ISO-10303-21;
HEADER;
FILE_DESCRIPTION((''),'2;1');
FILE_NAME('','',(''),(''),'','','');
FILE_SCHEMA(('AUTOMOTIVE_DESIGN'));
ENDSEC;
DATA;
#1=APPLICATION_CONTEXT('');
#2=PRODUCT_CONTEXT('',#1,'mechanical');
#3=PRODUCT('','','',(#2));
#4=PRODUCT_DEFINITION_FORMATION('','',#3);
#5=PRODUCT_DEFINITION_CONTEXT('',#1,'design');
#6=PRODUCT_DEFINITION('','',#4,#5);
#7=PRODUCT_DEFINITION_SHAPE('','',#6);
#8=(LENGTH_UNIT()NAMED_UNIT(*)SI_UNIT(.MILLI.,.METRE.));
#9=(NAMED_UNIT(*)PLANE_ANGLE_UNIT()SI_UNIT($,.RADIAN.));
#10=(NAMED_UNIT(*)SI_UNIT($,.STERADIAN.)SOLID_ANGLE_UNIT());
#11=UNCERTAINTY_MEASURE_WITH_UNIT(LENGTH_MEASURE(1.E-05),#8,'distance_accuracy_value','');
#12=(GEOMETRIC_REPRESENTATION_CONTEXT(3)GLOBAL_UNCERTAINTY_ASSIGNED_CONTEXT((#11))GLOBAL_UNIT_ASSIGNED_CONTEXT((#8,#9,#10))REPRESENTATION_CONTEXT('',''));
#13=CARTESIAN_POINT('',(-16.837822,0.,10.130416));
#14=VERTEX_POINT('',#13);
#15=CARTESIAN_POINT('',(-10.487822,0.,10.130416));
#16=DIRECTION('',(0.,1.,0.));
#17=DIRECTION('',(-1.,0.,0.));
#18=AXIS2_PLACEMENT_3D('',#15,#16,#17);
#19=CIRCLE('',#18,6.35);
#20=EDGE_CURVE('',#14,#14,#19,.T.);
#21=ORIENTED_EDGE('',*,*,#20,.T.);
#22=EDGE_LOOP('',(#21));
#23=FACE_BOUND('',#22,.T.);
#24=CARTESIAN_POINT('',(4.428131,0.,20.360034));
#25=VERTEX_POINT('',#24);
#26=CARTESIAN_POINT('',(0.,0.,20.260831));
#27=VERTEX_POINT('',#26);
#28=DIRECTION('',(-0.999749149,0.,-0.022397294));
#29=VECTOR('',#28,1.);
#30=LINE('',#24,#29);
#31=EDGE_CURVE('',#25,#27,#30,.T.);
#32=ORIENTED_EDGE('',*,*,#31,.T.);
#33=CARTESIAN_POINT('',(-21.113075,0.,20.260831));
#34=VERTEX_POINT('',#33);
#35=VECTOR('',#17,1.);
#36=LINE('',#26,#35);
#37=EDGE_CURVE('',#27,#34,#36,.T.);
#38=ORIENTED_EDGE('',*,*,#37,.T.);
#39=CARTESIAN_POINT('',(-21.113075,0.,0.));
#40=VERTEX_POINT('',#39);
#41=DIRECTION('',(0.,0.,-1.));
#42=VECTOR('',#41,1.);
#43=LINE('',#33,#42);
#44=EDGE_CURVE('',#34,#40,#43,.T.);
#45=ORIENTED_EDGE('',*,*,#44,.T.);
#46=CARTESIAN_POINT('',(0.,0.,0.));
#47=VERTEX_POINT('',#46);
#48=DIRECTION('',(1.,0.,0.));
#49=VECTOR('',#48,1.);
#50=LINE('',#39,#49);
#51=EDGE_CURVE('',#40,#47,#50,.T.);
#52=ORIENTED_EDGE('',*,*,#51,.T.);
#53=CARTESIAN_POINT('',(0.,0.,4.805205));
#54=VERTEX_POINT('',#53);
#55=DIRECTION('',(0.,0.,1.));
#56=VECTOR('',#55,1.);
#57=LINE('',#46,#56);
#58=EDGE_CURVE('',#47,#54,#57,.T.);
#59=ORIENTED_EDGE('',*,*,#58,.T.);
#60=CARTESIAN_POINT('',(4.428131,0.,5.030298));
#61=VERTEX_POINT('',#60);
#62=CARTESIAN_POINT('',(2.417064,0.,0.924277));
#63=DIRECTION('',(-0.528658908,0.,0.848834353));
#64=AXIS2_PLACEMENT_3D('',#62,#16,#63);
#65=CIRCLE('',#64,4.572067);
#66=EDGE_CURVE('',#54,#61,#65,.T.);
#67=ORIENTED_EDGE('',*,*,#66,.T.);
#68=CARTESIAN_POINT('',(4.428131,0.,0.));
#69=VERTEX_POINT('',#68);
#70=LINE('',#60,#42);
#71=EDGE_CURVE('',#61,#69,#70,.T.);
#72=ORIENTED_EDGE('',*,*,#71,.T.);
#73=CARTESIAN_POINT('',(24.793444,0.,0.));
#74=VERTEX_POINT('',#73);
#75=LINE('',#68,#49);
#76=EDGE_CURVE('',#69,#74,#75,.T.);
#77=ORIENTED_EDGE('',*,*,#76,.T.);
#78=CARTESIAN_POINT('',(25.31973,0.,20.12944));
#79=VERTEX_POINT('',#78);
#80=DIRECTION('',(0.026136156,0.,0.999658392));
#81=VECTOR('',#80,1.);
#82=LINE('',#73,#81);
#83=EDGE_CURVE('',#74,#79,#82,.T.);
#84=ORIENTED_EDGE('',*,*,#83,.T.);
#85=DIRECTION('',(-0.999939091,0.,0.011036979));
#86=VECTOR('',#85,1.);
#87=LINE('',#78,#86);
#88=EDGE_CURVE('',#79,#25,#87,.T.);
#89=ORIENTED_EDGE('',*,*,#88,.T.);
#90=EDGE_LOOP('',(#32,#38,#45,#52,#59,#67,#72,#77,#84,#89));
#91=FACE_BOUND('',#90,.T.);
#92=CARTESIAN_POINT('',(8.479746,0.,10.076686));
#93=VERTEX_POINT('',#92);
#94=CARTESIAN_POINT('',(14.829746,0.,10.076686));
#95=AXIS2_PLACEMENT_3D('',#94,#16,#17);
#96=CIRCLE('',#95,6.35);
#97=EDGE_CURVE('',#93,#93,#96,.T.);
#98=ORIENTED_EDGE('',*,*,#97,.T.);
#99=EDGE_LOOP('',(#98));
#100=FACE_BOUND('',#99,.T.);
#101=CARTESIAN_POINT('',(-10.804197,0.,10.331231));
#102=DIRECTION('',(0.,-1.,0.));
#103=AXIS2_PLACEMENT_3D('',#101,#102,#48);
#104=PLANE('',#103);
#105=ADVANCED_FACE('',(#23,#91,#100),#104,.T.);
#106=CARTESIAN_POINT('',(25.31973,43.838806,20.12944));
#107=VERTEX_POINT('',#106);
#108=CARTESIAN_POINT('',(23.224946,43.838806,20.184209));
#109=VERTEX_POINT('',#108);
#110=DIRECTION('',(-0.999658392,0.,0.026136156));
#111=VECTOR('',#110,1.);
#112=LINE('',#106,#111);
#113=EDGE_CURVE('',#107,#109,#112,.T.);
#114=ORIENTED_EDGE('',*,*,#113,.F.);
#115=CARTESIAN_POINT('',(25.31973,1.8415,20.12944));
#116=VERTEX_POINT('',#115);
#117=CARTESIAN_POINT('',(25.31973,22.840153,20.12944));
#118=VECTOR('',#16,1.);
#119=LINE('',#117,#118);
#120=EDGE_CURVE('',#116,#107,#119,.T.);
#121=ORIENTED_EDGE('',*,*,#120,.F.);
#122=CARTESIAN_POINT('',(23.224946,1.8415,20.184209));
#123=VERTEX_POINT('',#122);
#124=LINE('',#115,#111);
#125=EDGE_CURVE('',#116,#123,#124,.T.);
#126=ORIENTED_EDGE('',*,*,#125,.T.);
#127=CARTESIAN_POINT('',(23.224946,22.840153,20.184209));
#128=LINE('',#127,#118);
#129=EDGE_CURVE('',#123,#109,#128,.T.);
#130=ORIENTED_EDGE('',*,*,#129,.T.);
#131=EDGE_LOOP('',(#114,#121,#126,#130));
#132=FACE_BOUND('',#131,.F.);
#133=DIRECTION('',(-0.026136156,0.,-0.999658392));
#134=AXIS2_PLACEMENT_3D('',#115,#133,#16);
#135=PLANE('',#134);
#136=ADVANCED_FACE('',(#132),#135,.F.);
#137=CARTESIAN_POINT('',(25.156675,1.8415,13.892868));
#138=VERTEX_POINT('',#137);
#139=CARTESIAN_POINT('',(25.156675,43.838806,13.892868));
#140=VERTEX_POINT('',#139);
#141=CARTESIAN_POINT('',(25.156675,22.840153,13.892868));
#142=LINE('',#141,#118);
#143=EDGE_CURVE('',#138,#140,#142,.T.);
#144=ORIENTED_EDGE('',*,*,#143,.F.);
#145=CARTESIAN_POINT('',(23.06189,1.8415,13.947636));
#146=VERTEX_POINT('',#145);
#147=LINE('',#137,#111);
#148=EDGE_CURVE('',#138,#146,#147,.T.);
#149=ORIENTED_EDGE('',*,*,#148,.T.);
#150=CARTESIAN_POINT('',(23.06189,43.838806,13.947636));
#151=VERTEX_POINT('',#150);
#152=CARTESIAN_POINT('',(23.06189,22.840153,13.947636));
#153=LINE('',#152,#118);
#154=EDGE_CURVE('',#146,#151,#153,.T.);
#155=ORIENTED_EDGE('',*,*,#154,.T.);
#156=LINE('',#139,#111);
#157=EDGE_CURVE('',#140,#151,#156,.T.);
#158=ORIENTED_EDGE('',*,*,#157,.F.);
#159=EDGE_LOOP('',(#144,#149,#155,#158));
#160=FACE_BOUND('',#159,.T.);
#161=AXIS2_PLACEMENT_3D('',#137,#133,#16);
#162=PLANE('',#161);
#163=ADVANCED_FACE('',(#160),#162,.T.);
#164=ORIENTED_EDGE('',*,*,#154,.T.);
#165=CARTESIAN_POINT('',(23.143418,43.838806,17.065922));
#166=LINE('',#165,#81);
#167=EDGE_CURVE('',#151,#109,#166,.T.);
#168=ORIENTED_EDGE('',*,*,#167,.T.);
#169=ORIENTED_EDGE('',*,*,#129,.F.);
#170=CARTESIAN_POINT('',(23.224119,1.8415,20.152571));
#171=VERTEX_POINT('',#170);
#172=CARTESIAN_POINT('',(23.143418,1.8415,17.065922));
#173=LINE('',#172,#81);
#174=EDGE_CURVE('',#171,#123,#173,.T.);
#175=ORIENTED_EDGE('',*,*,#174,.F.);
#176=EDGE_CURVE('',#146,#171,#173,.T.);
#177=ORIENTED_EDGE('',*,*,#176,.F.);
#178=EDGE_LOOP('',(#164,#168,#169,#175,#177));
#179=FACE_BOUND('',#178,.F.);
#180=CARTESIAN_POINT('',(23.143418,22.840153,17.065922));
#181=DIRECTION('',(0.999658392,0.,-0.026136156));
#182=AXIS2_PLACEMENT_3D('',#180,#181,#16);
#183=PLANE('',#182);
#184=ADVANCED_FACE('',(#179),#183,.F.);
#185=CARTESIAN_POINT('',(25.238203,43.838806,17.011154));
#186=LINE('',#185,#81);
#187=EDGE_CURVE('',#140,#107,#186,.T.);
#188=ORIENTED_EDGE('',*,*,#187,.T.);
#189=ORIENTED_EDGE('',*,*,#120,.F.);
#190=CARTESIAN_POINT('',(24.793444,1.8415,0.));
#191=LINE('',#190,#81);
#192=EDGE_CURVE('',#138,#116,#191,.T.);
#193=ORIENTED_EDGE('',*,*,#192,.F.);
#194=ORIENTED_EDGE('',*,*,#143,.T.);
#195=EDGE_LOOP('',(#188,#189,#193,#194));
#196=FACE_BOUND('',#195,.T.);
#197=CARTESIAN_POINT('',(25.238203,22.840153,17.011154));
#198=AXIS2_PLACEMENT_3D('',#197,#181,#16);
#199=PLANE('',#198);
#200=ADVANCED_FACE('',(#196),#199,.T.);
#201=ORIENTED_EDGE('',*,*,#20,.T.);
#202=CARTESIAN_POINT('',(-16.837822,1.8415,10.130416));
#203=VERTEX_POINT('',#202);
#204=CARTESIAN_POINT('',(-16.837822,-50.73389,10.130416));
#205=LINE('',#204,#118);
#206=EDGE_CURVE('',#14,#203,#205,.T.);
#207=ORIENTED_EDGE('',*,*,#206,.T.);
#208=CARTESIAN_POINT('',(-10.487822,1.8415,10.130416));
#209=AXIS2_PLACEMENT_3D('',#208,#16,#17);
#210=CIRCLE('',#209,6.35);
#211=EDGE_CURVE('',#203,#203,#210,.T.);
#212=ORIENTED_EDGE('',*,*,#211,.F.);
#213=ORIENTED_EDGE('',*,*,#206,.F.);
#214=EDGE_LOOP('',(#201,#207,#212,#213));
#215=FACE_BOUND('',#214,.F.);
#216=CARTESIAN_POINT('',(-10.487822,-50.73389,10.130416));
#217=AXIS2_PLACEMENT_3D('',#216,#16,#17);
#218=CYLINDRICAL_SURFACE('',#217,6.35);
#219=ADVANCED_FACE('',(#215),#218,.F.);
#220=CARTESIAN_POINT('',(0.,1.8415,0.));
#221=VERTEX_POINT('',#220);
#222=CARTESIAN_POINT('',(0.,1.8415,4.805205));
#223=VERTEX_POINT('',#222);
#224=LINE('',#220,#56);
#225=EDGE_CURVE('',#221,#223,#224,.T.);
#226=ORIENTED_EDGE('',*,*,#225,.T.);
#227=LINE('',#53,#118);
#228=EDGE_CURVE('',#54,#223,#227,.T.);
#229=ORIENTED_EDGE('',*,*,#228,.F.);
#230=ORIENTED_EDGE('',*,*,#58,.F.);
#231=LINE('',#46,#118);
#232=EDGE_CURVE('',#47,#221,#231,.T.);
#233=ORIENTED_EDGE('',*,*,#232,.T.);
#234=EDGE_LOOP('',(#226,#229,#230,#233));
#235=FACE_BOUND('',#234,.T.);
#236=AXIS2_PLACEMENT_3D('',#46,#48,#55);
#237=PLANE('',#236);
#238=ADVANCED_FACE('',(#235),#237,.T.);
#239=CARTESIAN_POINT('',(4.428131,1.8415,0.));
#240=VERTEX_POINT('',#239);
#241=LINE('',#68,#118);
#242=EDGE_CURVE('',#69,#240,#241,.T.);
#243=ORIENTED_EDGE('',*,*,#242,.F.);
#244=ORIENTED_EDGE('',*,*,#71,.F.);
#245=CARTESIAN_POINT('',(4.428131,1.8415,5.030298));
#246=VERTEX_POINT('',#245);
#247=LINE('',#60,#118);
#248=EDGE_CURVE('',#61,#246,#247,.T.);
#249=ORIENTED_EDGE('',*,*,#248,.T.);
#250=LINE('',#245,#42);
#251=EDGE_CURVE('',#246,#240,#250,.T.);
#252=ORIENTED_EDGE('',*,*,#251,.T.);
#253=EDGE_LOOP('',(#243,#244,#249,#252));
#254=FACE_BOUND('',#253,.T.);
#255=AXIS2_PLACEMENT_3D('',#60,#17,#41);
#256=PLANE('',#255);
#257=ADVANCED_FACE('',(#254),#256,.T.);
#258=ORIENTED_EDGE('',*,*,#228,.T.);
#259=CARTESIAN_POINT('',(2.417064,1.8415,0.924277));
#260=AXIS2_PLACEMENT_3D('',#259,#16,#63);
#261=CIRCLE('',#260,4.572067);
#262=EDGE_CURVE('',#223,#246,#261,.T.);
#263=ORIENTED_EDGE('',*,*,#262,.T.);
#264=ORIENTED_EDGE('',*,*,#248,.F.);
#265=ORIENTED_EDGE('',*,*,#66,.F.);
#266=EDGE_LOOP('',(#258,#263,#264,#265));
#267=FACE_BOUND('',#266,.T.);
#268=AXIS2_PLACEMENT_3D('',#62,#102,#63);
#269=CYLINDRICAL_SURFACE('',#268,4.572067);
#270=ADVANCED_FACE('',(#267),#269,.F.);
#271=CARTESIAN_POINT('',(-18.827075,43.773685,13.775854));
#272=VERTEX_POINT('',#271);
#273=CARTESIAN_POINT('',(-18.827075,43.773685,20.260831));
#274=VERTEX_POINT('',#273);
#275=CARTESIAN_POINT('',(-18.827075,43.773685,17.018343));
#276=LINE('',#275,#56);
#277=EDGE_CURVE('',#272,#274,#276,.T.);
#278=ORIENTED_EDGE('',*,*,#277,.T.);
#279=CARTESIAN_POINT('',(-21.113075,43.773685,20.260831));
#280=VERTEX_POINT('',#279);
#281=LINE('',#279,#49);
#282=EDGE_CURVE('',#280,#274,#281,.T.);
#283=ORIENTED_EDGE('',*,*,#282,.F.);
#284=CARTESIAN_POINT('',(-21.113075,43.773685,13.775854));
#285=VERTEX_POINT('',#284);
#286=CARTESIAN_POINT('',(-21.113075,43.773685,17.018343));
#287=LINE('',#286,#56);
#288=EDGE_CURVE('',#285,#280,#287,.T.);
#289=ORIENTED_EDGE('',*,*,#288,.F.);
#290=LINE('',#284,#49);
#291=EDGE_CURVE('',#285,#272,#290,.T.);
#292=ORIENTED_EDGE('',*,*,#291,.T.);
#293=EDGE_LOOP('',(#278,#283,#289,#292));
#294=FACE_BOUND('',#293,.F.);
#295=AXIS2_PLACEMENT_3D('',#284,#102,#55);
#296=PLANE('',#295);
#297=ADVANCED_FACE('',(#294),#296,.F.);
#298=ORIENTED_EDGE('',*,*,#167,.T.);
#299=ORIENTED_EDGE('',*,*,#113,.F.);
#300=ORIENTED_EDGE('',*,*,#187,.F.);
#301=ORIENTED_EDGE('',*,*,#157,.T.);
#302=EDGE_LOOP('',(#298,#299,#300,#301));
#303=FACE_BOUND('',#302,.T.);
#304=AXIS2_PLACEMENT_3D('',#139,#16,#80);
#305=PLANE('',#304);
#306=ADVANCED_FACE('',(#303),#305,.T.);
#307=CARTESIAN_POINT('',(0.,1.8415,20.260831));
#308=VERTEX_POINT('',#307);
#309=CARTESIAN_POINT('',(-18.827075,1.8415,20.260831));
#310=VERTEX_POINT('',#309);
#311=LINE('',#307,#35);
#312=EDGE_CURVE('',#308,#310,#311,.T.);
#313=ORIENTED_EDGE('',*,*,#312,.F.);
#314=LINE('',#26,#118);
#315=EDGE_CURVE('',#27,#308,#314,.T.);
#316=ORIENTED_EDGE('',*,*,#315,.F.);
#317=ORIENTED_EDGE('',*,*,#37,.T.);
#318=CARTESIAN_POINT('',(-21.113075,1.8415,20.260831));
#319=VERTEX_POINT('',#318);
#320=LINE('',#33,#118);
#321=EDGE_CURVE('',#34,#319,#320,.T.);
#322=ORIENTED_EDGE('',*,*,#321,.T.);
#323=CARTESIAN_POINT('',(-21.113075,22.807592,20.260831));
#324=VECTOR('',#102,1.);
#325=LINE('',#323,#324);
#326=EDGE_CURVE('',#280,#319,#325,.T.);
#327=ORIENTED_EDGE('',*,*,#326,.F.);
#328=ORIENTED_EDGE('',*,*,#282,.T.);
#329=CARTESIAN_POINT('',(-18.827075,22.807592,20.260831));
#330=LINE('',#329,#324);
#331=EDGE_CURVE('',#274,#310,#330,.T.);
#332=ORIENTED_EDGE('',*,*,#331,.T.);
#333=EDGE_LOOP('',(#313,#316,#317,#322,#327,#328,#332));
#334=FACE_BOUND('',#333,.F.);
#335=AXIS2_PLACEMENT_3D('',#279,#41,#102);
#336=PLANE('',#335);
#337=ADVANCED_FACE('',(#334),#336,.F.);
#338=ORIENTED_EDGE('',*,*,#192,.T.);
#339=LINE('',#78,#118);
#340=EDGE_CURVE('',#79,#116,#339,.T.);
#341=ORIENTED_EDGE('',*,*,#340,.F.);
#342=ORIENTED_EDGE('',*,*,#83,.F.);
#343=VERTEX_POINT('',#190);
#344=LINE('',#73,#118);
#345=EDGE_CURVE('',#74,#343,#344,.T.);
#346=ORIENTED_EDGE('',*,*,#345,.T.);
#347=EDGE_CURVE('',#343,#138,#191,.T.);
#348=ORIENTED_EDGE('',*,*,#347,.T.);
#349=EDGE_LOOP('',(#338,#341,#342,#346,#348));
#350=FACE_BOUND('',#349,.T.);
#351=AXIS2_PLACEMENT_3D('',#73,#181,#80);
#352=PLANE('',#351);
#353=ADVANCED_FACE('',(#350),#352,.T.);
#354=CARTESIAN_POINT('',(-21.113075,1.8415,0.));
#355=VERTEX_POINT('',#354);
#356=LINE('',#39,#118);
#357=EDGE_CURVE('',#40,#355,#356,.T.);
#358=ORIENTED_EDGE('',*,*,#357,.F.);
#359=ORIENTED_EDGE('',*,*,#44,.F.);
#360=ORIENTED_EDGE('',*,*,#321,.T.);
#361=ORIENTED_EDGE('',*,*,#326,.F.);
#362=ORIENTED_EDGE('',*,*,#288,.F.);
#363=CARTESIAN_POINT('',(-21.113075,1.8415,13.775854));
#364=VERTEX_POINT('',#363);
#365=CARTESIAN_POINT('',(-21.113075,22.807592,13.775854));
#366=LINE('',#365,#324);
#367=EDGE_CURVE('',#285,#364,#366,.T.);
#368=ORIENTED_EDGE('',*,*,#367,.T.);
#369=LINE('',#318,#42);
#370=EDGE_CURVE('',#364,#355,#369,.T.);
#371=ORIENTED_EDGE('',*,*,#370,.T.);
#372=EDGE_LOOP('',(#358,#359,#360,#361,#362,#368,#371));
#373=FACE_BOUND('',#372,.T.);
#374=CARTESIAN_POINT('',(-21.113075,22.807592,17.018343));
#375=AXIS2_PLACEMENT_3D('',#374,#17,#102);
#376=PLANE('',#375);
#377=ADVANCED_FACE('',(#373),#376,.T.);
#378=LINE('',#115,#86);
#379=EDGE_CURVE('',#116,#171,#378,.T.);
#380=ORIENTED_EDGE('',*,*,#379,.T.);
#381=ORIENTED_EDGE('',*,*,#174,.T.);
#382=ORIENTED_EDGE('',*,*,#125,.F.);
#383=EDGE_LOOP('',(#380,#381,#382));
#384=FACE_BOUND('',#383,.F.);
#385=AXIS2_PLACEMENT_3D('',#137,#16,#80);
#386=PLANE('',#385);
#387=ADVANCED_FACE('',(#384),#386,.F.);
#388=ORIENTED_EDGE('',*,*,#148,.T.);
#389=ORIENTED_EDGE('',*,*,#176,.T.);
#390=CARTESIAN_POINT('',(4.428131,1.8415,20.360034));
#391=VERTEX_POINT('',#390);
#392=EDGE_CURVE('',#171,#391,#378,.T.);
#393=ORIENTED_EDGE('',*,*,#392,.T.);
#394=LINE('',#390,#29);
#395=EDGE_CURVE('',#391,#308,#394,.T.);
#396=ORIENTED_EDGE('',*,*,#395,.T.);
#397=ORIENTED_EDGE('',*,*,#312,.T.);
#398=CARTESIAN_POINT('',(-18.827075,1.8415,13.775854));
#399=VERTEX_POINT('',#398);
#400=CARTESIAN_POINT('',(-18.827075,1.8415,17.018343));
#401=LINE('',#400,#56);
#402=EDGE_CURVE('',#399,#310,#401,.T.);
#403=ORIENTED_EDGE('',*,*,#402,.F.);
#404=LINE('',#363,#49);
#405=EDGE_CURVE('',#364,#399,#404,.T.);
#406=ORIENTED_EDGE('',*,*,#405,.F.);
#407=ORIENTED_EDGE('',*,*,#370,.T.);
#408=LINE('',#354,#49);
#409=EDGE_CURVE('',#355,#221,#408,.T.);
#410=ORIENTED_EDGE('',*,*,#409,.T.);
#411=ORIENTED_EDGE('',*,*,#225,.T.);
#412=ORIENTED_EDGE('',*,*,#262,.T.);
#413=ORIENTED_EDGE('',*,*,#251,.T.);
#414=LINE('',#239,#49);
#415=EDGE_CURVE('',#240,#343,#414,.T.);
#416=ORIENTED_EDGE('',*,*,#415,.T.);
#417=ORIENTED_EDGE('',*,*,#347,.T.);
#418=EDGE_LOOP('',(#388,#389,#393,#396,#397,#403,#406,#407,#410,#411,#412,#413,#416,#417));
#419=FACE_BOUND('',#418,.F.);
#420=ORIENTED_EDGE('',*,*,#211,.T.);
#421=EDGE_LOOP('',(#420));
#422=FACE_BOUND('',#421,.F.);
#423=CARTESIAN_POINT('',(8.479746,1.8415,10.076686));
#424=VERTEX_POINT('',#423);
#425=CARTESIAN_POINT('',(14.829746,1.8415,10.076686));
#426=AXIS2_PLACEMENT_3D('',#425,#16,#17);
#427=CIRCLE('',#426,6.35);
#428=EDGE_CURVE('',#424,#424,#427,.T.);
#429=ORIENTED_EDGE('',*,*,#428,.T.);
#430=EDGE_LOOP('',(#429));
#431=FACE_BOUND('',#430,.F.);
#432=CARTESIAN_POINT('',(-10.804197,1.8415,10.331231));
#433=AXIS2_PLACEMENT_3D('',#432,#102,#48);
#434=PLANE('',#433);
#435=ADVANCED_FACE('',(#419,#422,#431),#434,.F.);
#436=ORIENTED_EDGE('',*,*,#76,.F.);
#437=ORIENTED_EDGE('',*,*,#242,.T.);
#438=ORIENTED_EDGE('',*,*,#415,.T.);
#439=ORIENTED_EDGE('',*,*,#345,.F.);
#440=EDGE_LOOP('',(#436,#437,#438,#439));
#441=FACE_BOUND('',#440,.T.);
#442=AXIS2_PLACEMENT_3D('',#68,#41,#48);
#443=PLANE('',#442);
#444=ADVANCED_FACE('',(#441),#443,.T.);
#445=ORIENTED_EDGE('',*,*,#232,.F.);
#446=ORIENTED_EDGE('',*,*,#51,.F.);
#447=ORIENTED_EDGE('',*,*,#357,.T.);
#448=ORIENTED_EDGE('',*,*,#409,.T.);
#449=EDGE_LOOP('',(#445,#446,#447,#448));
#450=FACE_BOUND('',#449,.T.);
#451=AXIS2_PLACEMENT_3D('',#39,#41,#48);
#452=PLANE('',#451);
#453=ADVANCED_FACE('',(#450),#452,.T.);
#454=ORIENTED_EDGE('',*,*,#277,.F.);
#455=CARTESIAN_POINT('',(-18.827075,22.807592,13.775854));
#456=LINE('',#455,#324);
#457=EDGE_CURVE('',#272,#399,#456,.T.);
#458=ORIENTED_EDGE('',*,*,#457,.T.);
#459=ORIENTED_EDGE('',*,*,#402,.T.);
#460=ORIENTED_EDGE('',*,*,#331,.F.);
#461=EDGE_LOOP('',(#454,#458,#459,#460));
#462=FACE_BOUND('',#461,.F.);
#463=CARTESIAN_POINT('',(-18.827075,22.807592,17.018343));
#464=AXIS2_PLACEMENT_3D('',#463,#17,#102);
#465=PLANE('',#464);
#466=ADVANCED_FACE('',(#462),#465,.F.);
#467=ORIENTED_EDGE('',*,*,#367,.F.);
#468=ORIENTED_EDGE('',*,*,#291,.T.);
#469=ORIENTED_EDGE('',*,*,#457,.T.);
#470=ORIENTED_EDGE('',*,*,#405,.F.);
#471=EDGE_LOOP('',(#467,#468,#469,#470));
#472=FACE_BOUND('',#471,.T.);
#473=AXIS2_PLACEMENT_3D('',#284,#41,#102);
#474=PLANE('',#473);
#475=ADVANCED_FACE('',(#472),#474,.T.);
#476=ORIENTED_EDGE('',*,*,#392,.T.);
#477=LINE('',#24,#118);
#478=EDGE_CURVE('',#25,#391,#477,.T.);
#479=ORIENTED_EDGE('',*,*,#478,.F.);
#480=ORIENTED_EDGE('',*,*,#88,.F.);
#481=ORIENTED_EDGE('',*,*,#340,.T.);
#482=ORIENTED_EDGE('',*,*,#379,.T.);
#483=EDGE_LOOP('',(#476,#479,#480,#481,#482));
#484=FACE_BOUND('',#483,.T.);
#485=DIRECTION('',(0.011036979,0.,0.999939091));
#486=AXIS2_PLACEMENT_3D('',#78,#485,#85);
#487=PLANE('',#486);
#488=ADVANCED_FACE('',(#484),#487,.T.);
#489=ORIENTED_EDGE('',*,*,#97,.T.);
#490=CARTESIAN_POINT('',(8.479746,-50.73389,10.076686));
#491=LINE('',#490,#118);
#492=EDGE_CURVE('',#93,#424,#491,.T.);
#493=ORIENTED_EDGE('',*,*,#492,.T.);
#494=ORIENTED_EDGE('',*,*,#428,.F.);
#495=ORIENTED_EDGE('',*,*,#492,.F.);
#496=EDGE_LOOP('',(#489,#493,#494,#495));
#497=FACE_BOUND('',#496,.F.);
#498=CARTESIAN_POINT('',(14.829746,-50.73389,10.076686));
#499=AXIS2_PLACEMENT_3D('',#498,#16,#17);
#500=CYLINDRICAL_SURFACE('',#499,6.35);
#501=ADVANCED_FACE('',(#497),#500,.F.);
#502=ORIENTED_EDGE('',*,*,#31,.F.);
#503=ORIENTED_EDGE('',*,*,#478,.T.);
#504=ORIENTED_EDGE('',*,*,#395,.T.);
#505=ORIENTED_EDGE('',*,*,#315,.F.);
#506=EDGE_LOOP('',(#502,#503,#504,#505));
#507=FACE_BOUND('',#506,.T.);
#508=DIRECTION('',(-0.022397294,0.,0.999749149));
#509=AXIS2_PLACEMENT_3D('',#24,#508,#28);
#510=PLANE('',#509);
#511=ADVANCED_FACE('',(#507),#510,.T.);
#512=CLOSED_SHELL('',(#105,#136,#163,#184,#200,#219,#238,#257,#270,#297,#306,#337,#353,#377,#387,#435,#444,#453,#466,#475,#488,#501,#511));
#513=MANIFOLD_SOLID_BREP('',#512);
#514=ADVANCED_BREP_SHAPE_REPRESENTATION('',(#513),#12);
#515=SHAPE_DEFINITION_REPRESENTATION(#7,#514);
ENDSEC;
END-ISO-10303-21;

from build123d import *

# Parameters (mm, degrees)
F0_R     = 9.7397478584
F0_R_2   = 9.242675957
F1_DEPTH = 1.8415
F2_D     = 12.7
F4_W     = 41.9321846507
F4_H     = 6.4849769697
F5_DEPTH = 2.286
F3_W     = 41.9973064504
F3_H     = 6.2387038374
F6_DEPTH = 2.0955


# Not quite as in the source:
# - a feature names something its author has since deleted; it is built from what else it names


with BuildPart() as f1:
    # F0 (on Front) → F1 (new body)
    with BuildSketch(Plane.XZ):
        with BuildLine():
            Line((0, 4.8052047364), (0, 20.2608313411))
            Line((0, 20.2608313411), (-21.113075316, 20.2608313411))
            Line((-21.113075316, 20.2608313411), (-21.113075316, 0))
            Line((-21.113075316, 0), (-2.0606040489, 0))
            ThreePointArc((-2.0606040489, 0), (-1.7849391427, 2.7262115351), (0, 4.8052047364))
        make_face()
        with Locations((-10.4878218845, 10.1304156706)):
            Circle(F0_R, mode=Mode.SUBTRACT)
        with BuildLine():
            Line((25.3197303883, 20.1294401959), (4.4281314508, 20.3600343892))
            Line((4.4281314508, 20.3600343892), (4.4281314508, 19.6842234582))
            Line((4.4281314508, 19.6842234582), (4.4281314508, 5.0302978839))
            ThreePointArc((4.4281314508, 5.0302978839), (6.5221702803, 2.937211036), (6.8947323598, 0))
            Line((6.8947323598, 0), (24.7934444089, 0))
            Line((24.7934444089, 0), (25.3197303883, 20.1294401959))
        make_face()
        with Locations((14.8297464475, 10.0766858086)):
            Circle(F0_R_2, mode=Mode.SUBTRACT)
        with Locations((-10.4878218845, 10.1304156706)):
            Circle(F0_R)
        with Locations((14.8297464475, 10.0766858086)):
            Circle(F0_R_2)
        with BuildLine():
            Line((4.4281314508, 20.3600343892), (0, 20.2608313411))
            Line((0, 20.2608313411), (0, 4.8052047364))
            ThreePointArc((0, 4.8052047364), (2.1849540655, 5.490448695), (4.4281314508, 5.0302978839))
            Line((4.4281314508, 5.0302978839), (4.4281314508, 19.6842234582))
            Line((4.4281314508, 19.6842234582), (4.4281314508, 20.3600343892))
        make_face()
        with BuildLine():
            ThreePointArc((6.8947323598, 0), (6.5221702803, 2.937211036), (4.4281314508, 5.0302978839))
            Line((4.4281314508, 5.0302978839), (4.4281314508, 0))
            Line((4.4281314508, 0), (6.8947323598, 0))
        make_face()
        with BuildLine():
            Line((0, 0), (0, 4.8052047364))
            ThreePointArc((0, 4.8052047364), (-1.7849391427, 2.7262115351), (-2.0606040489, 0))
            Line((-2.0606040489, 0), (0, 0))
        make_face()
    extrude(amount=-F1_DEPTH)

    # F2 (through all)
    with Locations(Plane.XZ):
        with Locations((-10.4878218845, 10.1304156706), (14.8297464475, 10.0766858086)):
            Hole(F2_D / 2)

    # F4 (on face) → F5 (join)
    with BuildSketch(Plane(origin=(-21.113075316, 0, 0), x_dir=(0, -1, 0), z_dir=(-1, 0, 0))):
        with Locations((-22.8075923253, 17.0183428563)):
            Rectangle(F4_W, F4_H)
    extrude(amount=-F5_DEPTH)

    # F3 (on face) → F6 (join)
    with BuildSketch(Plane(origin=(24.77650804, 0, -0.6477839757), x_dir=(0, 1, 0), z_dir=(0.9996583923, 0, -0.0261361563))):
        with Locations((22.8401532252, 17.6649723378)):
            Rectangle(F3_W, F3_H)
    extrude(amount=-F6_DEPTH)


solid = f1.part
